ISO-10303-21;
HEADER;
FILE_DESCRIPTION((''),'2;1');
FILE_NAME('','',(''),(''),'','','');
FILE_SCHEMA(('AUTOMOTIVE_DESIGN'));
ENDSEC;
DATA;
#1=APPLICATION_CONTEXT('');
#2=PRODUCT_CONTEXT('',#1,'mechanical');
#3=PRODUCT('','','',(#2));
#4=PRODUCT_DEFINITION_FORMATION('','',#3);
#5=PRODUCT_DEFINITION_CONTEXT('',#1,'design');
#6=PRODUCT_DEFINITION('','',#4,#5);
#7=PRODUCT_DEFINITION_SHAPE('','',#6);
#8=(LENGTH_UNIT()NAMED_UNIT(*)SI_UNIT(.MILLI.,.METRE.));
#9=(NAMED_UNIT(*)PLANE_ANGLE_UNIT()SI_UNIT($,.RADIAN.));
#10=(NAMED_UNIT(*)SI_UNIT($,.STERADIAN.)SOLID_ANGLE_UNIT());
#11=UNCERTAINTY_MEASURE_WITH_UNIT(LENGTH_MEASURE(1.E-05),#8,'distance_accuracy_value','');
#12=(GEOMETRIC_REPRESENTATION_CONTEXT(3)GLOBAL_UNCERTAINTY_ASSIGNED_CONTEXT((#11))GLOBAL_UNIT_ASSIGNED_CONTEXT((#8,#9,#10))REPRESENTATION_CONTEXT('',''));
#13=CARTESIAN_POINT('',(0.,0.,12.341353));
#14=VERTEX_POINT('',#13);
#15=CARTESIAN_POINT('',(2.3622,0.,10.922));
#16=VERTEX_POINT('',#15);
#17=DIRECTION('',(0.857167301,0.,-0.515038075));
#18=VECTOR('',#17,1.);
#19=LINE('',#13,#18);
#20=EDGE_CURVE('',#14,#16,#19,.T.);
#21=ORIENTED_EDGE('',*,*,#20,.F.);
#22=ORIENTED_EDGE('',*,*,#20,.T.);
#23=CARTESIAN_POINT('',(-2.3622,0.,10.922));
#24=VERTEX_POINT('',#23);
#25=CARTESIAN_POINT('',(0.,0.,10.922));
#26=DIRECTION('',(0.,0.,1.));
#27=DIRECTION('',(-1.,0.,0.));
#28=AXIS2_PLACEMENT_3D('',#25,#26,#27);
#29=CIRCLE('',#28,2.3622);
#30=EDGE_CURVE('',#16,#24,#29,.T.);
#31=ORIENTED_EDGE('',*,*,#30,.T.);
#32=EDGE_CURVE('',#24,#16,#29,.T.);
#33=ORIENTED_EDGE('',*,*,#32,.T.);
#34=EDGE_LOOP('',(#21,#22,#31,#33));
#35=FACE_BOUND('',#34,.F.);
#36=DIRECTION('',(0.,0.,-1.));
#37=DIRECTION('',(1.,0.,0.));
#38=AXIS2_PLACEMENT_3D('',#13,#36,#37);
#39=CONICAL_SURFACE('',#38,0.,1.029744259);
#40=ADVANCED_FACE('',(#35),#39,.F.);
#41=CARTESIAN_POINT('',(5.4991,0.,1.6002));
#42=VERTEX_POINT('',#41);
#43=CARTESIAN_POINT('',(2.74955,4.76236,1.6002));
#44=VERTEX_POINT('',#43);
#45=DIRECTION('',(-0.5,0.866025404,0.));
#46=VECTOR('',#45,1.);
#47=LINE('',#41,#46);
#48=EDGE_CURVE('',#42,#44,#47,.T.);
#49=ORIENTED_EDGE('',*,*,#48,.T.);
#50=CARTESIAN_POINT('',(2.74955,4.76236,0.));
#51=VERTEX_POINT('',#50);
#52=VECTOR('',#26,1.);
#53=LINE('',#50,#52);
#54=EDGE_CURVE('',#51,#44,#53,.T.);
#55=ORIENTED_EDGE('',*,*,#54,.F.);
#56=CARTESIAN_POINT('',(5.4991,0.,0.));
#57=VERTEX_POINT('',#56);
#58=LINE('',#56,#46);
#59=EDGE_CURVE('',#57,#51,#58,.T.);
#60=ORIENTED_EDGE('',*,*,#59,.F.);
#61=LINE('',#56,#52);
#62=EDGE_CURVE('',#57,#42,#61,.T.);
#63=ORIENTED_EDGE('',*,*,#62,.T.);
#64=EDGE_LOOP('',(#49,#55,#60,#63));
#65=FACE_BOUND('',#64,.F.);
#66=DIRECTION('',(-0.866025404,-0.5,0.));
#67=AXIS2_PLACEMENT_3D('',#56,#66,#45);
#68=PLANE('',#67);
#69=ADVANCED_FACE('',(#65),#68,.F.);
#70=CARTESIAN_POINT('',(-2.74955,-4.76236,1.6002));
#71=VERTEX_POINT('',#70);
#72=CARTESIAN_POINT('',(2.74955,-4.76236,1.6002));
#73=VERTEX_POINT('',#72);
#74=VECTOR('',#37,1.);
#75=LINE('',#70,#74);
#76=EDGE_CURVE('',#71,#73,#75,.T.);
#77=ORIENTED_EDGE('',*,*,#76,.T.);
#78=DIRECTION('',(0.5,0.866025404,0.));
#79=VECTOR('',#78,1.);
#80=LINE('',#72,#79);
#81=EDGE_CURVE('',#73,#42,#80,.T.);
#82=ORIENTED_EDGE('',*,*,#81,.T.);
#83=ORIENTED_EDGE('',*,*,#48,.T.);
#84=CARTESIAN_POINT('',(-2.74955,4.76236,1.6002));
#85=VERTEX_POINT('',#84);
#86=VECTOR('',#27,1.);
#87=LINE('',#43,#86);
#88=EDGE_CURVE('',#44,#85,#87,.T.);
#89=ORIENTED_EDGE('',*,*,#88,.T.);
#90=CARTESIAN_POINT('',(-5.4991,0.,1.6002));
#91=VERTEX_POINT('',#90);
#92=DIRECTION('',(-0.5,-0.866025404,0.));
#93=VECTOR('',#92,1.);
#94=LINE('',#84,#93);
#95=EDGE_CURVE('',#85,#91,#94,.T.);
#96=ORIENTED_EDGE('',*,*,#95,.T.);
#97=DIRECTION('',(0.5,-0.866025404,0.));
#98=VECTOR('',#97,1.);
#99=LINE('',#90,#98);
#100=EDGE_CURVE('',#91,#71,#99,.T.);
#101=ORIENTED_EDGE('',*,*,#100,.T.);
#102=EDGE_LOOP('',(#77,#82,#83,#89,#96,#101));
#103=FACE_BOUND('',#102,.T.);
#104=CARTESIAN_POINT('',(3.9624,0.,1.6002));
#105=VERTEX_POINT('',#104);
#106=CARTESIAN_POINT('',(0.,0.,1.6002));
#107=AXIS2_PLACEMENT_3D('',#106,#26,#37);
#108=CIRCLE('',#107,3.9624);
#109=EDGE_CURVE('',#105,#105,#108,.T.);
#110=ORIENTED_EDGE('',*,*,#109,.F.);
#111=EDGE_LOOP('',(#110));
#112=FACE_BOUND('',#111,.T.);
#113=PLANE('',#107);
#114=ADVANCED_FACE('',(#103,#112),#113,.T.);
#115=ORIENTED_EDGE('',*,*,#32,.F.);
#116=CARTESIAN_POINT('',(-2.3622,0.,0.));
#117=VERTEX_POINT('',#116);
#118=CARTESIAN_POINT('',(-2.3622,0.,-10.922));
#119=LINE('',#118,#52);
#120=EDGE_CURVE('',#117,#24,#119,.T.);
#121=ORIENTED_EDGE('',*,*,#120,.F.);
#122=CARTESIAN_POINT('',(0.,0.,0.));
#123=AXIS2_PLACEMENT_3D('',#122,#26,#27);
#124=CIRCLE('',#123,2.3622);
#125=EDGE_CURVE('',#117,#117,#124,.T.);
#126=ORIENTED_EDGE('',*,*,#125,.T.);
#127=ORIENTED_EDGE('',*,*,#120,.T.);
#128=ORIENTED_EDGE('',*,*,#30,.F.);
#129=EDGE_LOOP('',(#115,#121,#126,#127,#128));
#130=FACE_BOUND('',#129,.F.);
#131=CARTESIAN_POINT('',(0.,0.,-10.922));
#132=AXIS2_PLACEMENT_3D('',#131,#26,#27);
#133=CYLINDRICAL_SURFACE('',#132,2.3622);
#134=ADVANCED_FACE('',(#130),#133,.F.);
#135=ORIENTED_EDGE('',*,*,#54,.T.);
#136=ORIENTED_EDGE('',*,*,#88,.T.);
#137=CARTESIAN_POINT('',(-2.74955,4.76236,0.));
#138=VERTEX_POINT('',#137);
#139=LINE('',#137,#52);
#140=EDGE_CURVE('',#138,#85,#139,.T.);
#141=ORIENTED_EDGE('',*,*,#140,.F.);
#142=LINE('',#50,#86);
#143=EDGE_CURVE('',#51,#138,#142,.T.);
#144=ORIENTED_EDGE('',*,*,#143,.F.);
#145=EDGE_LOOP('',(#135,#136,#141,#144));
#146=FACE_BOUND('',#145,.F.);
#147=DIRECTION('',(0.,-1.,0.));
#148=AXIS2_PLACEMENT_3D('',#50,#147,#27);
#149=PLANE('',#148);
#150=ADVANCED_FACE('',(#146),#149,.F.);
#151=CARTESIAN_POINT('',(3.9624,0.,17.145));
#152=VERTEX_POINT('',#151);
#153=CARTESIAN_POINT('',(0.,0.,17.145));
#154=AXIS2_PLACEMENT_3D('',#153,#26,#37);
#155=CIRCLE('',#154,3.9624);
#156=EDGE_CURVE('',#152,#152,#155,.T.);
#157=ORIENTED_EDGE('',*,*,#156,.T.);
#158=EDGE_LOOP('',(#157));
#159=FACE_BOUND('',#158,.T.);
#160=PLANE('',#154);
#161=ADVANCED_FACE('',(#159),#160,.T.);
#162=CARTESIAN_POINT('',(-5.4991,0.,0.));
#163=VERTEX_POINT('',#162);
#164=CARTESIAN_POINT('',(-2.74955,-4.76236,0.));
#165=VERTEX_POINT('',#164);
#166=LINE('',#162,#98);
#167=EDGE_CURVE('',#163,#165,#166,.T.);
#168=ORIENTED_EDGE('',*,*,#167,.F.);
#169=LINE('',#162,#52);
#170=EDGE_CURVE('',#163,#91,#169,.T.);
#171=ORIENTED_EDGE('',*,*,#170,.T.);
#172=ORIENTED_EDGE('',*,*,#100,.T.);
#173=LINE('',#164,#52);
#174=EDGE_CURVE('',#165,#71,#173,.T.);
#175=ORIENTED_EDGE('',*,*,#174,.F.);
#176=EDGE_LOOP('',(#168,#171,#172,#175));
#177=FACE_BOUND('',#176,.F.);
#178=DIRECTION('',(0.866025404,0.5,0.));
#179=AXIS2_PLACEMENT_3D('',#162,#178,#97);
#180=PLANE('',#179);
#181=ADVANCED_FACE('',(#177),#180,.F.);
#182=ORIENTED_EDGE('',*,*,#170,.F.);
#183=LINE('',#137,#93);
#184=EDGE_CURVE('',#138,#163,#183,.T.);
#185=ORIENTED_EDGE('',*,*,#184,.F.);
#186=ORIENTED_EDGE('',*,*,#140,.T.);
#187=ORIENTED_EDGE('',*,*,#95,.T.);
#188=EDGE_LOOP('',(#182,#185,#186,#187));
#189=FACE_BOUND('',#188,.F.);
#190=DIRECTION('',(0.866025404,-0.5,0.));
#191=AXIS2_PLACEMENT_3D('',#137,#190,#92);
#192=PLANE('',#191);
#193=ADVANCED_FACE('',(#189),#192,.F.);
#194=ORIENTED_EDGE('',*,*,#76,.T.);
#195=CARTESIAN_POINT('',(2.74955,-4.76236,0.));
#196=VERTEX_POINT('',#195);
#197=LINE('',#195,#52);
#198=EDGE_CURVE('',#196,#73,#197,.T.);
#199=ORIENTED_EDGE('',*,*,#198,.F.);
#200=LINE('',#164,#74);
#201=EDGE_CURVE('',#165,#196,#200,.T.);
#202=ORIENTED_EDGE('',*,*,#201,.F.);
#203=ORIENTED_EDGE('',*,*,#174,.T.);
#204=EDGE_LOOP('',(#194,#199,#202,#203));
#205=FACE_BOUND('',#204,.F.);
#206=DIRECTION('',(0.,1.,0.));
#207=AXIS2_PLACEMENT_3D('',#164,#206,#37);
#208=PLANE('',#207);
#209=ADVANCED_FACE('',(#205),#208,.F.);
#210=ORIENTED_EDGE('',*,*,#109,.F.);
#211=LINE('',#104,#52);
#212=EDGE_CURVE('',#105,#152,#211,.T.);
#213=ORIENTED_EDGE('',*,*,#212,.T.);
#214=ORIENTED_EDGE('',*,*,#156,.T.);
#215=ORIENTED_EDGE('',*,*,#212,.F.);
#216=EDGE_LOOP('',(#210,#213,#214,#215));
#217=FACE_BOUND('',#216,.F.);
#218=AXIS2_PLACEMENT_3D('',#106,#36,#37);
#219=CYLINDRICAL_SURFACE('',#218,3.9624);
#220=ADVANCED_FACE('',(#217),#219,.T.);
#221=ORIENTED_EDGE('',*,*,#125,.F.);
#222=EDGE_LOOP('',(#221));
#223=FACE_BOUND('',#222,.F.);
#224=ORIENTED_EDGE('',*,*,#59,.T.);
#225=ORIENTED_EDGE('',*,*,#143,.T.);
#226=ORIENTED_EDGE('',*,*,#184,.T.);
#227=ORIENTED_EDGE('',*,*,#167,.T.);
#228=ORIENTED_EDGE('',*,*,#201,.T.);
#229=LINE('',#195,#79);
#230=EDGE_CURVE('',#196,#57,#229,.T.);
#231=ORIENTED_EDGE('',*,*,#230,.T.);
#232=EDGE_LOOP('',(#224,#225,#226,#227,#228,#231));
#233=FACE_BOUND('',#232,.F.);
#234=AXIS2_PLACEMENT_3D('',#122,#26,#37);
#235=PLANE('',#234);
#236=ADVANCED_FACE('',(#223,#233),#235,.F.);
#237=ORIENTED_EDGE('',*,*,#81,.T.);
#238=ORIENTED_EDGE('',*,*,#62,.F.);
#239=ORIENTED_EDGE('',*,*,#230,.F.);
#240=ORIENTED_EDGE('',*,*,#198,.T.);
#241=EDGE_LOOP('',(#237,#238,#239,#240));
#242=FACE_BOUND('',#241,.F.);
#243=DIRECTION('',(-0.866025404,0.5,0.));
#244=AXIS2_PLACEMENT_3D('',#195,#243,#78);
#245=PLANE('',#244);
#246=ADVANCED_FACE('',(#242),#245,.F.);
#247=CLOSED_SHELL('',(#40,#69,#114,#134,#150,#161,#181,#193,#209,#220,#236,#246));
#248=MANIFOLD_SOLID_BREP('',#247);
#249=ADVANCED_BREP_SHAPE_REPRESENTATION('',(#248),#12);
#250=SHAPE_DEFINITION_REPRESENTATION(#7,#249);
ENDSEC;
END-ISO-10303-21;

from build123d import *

# Parameters (mm, degrees)
F1_DEPTH = 1.6002
F2_R     = 3.9624
F3_DEPTH = 15.5448
F5_D     = 4.7244
F5_DEPTH = 10.922
F5_TIP   = 1.4193529543


# Not quite as in the source:
# - a feature names something its author has since deleted; it is built from what else it names


with BuildPart() as f1:
    # F0 (on Top) → F1 (new body)
    with BuildSketch(Plane.XY):
        Polygon((5.4991, 0), (2.74955, 4.762360298), (-2.74955, 4.762360298), (-5.4991, 0), (-2.74955, -4.762360298), (2.74955, -4.762360298), align=None)
    extrude(amount=F1_DEPTH)

    # F2 (on face) → F3 (join)
    with BuildSketch(Plane.XY.offset(1.6002)):
        Circle(F2_R)
    extrude(amount=F3_DEPTH)

    # F5
    with Locations(Plane(origin=(0, 0, 0), x_dir=(1, 0, 0), z_dir=(0, 0, -1))):
        with Locations((0, 0)):
            Hole(F5_D / 2, depth=F5_DEPTH)
            with Locations((0, 0, -(F5_DEPTH + F5_TIP / 2))):  # 118° drill point
                Cone(0, F5_D / 2, F5_TIP, mode=Mode.SUBTRACT)


solid = f1.part
